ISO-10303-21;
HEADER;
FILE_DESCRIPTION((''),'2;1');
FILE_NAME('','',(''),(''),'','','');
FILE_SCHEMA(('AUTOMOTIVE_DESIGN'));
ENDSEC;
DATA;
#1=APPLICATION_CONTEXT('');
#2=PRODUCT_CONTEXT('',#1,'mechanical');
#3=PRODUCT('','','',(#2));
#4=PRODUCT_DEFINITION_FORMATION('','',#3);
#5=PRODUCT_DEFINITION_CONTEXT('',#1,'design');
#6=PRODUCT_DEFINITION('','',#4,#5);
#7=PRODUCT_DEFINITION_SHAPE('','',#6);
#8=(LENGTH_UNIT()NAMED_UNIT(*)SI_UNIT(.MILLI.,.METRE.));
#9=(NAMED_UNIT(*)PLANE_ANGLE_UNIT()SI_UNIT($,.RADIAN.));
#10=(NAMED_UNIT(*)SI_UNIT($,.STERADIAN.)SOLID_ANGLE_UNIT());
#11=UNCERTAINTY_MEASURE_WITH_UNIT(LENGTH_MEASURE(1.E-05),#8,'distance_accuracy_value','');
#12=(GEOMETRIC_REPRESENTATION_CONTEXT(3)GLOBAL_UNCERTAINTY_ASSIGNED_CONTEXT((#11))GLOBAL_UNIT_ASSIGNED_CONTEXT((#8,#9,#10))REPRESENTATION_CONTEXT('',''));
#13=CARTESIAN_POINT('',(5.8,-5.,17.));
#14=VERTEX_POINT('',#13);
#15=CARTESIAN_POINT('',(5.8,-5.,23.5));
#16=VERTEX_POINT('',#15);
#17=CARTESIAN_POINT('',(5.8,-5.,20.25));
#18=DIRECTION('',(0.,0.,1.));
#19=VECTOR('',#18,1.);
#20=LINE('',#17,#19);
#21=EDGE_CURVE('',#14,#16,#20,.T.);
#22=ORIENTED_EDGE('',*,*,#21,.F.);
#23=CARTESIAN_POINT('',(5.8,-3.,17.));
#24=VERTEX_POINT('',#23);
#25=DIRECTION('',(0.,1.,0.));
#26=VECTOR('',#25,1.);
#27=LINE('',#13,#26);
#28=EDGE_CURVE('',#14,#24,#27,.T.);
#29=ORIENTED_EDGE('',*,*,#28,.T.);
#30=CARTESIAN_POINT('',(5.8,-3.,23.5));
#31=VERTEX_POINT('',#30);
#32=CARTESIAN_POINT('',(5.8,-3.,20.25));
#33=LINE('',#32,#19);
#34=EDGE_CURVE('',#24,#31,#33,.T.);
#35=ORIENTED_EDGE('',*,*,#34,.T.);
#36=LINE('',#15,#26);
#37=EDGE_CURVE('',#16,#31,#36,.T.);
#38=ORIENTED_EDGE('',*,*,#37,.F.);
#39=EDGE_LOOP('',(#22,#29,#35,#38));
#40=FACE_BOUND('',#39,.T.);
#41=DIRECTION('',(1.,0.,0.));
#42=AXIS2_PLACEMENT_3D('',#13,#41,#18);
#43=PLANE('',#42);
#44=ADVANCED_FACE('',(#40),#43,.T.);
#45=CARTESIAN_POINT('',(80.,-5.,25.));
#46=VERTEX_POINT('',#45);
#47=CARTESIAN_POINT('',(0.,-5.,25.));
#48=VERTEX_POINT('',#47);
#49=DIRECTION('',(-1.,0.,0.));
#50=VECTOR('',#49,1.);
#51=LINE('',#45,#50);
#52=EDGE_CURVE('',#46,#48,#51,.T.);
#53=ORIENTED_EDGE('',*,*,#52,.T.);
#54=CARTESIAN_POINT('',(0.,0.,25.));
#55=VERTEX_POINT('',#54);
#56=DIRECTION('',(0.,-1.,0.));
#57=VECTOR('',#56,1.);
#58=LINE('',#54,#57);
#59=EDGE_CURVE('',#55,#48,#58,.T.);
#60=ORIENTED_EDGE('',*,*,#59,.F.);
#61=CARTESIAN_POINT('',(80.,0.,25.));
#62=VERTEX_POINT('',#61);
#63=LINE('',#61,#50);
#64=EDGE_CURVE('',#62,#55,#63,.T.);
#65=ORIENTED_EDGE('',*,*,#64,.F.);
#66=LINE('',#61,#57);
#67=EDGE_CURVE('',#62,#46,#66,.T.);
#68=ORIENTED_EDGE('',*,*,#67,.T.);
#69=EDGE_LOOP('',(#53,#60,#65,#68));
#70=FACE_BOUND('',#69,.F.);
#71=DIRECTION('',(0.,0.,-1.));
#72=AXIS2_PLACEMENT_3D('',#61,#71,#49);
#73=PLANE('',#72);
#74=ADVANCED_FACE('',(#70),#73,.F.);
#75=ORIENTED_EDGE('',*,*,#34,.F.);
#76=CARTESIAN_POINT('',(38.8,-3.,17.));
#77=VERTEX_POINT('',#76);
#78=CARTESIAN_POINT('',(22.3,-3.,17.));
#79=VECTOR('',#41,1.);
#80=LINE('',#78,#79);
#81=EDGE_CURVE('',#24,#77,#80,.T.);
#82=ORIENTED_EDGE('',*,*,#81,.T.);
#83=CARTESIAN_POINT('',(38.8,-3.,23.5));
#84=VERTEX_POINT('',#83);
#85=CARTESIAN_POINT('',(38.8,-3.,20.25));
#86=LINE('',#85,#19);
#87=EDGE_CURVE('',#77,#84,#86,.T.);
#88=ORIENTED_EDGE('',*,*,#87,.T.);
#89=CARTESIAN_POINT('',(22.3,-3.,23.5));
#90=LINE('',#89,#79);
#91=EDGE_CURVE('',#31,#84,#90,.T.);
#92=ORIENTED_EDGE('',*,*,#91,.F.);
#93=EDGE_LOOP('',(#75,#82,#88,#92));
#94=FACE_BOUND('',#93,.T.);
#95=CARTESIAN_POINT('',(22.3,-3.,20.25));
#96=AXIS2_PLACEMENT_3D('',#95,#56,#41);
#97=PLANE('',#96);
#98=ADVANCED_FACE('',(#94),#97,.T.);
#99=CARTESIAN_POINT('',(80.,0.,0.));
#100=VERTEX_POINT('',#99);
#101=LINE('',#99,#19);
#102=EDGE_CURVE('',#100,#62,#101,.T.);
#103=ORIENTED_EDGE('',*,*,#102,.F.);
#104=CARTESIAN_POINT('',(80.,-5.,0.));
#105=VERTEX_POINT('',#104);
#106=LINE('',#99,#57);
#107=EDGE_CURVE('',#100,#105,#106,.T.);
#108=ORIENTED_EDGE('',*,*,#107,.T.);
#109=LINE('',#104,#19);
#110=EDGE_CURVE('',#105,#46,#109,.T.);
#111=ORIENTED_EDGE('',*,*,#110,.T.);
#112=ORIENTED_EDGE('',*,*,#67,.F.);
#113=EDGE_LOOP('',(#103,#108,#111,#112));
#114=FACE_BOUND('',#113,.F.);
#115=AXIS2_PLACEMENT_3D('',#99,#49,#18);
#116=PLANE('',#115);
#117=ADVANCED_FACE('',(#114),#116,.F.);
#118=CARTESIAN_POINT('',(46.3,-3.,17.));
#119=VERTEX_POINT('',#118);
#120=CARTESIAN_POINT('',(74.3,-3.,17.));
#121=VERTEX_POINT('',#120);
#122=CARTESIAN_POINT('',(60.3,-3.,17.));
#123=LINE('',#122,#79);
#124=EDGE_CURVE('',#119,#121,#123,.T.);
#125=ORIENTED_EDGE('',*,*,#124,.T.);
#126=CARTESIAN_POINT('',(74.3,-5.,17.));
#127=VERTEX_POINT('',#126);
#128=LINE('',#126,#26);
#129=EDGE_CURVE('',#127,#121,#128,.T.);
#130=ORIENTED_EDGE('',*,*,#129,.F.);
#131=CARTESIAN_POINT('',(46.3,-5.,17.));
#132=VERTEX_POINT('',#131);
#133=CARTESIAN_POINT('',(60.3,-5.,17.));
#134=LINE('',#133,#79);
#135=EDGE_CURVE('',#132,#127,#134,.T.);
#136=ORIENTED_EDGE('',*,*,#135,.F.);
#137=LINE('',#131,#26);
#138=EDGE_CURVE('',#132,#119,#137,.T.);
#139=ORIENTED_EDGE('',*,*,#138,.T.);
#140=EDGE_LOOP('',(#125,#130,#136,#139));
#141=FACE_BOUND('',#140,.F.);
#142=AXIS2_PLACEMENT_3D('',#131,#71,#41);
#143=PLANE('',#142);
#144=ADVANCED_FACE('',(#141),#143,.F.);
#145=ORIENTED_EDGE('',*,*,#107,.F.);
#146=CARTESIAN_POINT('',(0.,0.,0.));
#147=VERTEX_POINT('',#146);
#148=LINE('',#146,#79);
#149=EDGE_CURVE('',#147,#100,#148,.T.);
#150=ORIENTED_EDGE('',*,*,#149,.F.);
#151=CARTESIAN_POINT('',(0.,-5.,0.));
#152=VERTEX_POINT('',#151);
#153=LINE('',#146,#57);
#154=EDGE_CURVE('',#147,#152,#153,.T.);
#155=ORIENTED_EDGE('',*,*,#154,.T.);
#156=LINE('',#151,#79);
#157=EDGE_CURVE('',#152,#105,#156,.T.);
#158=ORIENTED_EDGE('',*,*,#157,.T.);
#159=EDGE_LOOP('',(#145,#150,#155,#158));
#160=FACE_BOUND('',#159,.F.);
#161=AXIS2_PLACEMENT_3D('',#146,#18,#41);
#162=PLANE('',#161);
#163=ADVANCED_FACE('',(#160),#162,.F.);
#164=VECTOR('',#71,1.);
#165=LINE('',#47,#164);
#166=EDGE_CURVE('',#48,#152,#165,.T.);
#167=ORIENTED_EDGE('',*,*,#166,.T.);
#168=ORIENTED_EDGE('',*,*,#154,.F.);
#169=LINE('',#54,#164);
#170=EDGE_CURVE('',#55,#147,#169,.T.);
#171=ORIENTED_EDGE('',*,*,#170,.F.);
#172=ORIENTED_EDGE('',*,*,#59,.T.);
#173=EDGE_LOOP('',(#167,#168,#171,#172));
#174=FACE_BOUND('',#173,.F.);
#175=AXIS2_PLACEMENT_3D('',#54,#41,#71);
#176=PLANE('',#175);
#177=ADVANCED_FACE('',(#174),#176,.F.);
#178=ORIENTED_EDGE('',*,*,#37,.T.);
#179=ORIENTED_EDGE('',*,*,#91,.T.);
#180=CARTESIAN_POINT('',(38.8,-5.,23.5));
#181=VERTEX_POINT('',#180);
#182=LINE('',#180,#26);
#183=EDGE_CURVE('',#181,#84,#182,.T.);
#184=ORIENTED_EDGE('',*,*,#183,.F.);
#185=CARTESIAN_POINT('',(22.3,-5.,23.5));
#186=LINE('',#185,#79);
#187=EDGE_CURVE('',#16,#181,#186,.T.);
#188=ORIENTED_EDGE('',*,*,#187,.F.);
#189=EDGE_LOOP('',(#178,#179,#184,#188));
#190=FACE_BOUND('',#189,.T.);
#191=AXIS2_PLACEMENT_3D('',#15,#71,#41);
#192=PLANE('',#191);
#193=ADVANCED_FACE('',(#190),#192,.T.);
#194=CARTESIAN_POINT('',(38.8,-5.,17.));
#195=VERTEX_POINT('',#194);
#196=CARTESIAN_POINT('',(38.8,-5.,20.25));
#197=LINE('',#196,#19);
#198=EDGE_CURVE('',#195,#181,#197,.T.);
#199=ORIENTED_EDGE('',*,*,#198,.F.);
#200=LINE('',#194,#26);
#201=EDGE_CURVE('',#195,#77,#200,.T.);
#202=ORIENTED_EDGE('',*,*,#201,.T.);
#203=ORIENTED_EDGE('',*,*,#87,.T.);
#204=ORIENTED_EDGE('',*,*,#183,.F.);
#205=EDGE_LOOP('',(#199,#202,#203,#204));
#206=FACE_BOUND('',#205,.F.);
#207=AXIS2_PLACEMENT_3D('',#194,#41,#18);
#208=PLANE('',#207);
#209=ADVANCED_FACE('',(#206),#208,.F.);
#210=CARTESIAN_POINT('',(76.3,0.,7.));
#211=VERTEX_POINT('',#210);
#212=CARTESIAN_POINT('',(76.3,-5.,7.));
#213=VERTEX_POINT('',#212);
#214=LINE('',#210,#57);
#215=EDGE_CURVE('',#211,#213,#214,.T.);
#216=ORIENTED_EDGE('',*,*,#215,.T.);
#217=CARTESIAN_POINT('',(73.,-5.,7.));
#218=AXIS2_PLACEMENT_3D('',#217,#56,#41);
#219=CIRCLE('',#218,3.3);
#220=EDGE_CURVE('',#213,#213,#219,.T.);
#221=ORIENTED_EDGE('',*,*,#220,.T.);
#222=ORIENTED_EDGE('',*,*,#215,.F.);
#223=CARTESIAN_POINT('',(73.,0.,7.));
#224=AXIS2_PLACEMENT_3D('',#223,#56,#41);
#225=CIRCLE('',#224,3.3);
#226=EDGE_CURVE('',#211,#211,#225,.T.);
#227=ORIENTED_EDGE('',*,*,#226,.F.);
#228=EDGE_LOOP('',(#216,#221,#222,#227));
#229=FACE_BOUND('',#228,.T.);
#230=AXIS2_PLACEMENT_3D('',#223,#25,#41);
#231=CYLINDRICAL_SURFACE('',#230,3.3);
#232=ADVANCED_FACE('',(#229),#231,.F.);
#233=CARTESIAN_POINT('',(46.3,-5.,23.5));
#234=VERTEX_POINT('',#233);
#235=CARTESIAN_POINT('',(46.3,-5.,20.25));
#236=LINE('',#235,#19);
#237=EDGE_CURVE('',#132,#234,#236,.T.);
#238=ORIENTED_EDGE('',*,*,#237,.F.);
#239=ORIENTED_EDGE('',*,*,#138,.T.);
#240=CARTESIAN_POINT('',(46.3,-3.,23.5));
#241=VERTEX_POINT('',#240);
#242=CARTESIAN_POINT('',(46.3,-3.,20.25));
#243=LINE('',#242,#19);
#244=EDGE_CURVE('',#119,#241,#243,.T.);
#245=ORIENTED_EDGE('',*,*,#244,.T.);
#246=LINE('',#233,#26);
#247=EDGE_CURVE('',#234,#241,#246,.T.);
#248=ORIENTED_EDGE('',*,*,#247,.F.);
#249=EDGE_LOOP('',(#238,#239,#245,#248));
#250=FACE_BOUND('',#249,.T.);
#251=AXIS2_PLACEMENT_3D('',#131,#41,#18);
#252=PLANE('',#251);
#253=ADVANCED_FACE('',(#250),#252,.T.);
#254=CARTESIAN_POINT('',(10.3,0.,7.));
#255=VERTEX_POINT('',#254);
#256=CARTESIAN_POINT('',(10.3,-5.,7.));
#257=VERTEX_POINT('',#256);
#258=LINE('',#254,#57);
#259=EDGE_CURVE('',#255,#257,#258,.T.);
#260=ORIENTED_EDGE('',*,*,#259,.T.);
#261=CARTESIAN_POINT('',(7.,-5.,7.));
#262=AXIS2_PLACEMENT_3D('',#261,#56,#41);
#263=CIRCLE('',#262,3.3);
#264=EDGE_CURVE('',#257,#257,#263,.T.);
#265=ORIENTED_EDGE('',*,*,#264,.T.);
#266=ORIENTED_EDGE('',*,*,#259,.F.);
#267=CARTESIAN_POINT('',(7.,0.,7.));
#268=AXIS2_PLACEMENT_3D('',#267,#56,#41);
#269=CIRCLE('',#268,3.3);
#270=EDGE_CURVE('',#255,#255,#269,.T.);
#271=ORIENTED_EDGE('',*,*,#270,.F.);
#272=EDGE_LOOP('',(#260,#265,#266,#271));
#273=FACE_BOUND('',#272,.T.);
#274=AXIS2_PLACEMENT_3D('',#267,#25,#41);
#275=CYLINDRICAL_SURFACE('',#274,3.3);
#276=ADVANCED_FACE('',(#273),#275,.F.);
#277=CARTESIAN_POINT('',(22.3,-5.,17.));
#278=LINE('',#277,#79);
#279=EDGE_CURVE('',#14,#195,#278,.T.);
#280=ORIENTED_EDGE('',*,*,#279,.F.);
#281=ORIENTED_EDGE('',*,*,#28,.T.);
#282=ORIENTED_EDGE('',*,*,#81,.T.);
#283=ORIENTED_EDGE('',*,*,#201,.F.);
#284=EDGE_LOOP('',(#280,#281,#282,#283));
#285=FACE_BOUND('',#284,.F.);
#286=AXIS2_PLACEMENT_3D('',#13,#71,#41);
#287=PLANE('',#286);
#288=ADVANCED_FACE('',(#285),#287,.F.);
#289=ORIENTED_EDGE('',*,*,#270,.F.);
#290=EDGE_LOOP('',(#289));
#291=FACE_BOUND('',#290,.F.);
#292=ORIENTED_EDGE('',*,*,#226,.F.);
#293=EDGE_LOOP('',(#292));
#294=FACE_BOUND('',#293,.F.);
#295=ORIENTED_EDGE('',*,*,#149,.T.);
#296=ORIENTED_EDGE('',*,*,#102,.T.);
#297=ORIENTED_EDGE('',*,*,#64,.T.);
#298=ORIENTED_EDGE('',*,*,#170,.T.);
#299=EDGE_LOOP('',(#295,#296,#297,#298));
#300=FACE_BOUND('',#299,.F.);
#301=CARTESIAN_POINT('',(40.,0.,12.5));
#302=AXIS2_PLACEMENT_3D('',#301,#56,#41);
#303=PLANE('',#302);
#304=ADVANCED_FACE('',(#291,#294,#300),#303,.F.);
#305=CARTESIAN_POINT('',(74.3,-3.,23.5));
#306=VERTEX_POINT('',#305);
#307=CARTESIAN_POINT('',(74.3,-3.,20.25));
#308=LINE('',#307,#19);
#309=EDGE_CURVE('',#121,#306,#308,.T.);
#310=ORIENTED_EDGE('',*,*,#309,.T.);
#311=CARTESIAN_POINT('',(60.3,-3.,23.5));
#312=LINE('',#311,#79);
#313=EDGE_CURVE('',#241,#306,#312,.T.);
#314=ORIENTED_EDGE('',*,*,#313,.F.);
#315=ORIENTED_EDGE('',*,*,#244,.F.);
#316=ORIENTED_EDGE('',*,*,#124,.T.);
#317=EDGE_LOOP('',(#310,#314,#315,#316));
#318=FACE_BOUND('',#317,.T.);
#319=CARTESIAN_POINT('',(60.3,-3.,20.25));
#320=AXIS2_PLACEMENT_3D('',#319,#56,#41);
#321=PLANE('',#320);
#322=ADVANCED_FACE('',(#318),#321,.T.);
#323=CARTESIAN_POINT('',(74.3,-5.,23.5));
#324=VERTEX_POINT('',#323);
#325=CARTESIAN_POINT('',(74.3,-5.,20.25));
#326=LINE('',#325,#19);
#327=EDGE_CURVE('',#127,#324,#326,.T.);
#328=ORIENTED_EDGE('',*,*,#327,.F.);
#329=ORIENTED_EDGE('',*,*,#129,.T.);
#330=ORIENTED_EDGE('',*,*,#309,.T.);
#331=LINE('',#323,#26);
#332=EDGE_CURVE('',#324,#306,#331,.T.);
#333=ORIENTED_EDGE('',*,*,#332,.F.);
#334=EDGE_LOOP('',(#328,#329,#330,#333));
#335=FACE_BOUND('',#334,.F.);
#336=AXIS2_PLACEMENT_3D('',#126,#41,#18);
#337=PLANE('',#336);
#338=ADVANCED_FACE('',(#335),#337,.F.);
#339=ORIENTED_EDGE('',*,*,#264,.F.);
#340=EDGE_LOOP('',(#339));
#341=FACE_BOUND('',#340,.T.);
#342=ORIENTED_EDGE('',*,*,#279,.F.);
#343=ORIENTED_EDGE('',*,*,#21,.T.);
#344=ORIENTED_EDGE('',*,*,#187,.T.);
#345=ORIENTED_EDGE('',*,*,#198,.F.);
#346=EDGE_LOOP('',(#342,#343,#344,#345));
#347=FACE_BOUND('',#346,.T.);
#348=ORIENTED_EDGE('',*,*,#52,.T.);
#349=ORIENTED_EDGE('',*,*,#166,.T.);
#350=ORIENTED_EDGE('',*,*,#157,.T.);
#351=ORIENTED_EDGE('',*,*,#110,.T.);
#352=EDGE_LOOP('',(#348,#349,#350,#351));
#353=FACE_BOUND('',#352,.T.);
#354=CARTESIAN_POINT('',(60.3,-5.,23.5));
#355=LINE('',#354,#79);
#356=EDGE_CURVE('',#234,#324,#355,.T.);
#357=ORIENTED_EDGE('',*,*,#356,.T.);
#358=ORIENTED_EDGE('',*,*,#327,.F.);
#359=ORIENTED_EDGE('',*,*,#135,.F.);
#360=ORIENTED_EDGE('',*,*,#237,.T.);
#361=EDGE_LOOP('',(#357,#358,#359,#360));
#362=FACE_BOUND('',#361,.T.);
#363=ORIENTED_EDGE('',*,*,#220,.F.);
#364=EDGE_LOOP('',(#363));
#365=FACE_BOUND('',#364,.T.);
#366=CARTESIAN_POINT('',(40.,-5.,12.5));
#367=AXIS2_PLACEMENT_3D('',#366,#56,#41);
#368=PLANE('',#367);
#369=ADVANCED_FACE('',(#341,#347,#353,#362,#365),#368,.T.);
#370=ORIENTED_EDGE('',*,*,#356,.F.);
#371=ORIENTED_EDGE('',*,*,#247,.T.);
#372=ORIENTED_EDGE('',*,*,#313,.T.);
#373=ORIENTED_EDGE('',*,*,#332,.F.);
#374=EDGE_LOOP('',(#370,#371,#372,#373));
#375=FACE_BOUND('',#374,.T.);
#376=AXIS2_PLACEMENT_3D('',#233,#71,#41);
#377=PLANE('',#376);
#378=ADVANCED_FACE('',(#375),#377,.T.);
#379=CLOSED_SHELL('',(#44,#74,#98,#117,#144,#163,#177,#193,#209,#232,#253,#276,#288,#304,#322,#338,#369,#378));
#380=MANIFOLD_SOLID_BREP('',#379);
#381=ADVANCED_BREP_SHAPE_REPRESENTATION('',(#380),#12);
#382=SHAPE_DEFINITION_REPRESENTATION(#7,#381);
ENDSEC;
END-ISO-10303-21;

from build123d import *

# Parameters (mm, degrees)
F0_R     = 3.3
F1_DEPTH = 5
F2_W     = 33
F2_H     = 6.5
F2_W_2   = 28
F3_DEPTH = 2


# Not quite as in the source:
# - a feature names something its author has since deleted; it is built from what else it names


with BuildPart() as f1:
    # F0 (on Front) → F1 (new body)
    with BuildSketch(Plane.XZ):
        Polygon((0, 17), (0, 0), (80, 0), (80, 17), (80, 23), (80, 25), (0, 25), (0, 23), align=None)
        with Locations((7, 7)):
            Circle(F0_R, mode=Mode.SUBTRACT)
        with Locations((73, 7)):
            Circle(F0_R, mode=Mode.SUBTRACT)
    extrude(amount=F1_DEPTH)

    # F2 (on face) → F3 (cut)
    with BuildSketch(Plane.XZ.offset(5)):
        with Locations((22.3, 20.25)):
            Rectangle(F2_W, F2_H)
        with Locations((60.3, 20.25)):
            Rectangle(F2_W_2, F2_H)
    extrude(amount=-F3_DEPTH, mode=Mode.SUBTRACT)


solid = f1.part
